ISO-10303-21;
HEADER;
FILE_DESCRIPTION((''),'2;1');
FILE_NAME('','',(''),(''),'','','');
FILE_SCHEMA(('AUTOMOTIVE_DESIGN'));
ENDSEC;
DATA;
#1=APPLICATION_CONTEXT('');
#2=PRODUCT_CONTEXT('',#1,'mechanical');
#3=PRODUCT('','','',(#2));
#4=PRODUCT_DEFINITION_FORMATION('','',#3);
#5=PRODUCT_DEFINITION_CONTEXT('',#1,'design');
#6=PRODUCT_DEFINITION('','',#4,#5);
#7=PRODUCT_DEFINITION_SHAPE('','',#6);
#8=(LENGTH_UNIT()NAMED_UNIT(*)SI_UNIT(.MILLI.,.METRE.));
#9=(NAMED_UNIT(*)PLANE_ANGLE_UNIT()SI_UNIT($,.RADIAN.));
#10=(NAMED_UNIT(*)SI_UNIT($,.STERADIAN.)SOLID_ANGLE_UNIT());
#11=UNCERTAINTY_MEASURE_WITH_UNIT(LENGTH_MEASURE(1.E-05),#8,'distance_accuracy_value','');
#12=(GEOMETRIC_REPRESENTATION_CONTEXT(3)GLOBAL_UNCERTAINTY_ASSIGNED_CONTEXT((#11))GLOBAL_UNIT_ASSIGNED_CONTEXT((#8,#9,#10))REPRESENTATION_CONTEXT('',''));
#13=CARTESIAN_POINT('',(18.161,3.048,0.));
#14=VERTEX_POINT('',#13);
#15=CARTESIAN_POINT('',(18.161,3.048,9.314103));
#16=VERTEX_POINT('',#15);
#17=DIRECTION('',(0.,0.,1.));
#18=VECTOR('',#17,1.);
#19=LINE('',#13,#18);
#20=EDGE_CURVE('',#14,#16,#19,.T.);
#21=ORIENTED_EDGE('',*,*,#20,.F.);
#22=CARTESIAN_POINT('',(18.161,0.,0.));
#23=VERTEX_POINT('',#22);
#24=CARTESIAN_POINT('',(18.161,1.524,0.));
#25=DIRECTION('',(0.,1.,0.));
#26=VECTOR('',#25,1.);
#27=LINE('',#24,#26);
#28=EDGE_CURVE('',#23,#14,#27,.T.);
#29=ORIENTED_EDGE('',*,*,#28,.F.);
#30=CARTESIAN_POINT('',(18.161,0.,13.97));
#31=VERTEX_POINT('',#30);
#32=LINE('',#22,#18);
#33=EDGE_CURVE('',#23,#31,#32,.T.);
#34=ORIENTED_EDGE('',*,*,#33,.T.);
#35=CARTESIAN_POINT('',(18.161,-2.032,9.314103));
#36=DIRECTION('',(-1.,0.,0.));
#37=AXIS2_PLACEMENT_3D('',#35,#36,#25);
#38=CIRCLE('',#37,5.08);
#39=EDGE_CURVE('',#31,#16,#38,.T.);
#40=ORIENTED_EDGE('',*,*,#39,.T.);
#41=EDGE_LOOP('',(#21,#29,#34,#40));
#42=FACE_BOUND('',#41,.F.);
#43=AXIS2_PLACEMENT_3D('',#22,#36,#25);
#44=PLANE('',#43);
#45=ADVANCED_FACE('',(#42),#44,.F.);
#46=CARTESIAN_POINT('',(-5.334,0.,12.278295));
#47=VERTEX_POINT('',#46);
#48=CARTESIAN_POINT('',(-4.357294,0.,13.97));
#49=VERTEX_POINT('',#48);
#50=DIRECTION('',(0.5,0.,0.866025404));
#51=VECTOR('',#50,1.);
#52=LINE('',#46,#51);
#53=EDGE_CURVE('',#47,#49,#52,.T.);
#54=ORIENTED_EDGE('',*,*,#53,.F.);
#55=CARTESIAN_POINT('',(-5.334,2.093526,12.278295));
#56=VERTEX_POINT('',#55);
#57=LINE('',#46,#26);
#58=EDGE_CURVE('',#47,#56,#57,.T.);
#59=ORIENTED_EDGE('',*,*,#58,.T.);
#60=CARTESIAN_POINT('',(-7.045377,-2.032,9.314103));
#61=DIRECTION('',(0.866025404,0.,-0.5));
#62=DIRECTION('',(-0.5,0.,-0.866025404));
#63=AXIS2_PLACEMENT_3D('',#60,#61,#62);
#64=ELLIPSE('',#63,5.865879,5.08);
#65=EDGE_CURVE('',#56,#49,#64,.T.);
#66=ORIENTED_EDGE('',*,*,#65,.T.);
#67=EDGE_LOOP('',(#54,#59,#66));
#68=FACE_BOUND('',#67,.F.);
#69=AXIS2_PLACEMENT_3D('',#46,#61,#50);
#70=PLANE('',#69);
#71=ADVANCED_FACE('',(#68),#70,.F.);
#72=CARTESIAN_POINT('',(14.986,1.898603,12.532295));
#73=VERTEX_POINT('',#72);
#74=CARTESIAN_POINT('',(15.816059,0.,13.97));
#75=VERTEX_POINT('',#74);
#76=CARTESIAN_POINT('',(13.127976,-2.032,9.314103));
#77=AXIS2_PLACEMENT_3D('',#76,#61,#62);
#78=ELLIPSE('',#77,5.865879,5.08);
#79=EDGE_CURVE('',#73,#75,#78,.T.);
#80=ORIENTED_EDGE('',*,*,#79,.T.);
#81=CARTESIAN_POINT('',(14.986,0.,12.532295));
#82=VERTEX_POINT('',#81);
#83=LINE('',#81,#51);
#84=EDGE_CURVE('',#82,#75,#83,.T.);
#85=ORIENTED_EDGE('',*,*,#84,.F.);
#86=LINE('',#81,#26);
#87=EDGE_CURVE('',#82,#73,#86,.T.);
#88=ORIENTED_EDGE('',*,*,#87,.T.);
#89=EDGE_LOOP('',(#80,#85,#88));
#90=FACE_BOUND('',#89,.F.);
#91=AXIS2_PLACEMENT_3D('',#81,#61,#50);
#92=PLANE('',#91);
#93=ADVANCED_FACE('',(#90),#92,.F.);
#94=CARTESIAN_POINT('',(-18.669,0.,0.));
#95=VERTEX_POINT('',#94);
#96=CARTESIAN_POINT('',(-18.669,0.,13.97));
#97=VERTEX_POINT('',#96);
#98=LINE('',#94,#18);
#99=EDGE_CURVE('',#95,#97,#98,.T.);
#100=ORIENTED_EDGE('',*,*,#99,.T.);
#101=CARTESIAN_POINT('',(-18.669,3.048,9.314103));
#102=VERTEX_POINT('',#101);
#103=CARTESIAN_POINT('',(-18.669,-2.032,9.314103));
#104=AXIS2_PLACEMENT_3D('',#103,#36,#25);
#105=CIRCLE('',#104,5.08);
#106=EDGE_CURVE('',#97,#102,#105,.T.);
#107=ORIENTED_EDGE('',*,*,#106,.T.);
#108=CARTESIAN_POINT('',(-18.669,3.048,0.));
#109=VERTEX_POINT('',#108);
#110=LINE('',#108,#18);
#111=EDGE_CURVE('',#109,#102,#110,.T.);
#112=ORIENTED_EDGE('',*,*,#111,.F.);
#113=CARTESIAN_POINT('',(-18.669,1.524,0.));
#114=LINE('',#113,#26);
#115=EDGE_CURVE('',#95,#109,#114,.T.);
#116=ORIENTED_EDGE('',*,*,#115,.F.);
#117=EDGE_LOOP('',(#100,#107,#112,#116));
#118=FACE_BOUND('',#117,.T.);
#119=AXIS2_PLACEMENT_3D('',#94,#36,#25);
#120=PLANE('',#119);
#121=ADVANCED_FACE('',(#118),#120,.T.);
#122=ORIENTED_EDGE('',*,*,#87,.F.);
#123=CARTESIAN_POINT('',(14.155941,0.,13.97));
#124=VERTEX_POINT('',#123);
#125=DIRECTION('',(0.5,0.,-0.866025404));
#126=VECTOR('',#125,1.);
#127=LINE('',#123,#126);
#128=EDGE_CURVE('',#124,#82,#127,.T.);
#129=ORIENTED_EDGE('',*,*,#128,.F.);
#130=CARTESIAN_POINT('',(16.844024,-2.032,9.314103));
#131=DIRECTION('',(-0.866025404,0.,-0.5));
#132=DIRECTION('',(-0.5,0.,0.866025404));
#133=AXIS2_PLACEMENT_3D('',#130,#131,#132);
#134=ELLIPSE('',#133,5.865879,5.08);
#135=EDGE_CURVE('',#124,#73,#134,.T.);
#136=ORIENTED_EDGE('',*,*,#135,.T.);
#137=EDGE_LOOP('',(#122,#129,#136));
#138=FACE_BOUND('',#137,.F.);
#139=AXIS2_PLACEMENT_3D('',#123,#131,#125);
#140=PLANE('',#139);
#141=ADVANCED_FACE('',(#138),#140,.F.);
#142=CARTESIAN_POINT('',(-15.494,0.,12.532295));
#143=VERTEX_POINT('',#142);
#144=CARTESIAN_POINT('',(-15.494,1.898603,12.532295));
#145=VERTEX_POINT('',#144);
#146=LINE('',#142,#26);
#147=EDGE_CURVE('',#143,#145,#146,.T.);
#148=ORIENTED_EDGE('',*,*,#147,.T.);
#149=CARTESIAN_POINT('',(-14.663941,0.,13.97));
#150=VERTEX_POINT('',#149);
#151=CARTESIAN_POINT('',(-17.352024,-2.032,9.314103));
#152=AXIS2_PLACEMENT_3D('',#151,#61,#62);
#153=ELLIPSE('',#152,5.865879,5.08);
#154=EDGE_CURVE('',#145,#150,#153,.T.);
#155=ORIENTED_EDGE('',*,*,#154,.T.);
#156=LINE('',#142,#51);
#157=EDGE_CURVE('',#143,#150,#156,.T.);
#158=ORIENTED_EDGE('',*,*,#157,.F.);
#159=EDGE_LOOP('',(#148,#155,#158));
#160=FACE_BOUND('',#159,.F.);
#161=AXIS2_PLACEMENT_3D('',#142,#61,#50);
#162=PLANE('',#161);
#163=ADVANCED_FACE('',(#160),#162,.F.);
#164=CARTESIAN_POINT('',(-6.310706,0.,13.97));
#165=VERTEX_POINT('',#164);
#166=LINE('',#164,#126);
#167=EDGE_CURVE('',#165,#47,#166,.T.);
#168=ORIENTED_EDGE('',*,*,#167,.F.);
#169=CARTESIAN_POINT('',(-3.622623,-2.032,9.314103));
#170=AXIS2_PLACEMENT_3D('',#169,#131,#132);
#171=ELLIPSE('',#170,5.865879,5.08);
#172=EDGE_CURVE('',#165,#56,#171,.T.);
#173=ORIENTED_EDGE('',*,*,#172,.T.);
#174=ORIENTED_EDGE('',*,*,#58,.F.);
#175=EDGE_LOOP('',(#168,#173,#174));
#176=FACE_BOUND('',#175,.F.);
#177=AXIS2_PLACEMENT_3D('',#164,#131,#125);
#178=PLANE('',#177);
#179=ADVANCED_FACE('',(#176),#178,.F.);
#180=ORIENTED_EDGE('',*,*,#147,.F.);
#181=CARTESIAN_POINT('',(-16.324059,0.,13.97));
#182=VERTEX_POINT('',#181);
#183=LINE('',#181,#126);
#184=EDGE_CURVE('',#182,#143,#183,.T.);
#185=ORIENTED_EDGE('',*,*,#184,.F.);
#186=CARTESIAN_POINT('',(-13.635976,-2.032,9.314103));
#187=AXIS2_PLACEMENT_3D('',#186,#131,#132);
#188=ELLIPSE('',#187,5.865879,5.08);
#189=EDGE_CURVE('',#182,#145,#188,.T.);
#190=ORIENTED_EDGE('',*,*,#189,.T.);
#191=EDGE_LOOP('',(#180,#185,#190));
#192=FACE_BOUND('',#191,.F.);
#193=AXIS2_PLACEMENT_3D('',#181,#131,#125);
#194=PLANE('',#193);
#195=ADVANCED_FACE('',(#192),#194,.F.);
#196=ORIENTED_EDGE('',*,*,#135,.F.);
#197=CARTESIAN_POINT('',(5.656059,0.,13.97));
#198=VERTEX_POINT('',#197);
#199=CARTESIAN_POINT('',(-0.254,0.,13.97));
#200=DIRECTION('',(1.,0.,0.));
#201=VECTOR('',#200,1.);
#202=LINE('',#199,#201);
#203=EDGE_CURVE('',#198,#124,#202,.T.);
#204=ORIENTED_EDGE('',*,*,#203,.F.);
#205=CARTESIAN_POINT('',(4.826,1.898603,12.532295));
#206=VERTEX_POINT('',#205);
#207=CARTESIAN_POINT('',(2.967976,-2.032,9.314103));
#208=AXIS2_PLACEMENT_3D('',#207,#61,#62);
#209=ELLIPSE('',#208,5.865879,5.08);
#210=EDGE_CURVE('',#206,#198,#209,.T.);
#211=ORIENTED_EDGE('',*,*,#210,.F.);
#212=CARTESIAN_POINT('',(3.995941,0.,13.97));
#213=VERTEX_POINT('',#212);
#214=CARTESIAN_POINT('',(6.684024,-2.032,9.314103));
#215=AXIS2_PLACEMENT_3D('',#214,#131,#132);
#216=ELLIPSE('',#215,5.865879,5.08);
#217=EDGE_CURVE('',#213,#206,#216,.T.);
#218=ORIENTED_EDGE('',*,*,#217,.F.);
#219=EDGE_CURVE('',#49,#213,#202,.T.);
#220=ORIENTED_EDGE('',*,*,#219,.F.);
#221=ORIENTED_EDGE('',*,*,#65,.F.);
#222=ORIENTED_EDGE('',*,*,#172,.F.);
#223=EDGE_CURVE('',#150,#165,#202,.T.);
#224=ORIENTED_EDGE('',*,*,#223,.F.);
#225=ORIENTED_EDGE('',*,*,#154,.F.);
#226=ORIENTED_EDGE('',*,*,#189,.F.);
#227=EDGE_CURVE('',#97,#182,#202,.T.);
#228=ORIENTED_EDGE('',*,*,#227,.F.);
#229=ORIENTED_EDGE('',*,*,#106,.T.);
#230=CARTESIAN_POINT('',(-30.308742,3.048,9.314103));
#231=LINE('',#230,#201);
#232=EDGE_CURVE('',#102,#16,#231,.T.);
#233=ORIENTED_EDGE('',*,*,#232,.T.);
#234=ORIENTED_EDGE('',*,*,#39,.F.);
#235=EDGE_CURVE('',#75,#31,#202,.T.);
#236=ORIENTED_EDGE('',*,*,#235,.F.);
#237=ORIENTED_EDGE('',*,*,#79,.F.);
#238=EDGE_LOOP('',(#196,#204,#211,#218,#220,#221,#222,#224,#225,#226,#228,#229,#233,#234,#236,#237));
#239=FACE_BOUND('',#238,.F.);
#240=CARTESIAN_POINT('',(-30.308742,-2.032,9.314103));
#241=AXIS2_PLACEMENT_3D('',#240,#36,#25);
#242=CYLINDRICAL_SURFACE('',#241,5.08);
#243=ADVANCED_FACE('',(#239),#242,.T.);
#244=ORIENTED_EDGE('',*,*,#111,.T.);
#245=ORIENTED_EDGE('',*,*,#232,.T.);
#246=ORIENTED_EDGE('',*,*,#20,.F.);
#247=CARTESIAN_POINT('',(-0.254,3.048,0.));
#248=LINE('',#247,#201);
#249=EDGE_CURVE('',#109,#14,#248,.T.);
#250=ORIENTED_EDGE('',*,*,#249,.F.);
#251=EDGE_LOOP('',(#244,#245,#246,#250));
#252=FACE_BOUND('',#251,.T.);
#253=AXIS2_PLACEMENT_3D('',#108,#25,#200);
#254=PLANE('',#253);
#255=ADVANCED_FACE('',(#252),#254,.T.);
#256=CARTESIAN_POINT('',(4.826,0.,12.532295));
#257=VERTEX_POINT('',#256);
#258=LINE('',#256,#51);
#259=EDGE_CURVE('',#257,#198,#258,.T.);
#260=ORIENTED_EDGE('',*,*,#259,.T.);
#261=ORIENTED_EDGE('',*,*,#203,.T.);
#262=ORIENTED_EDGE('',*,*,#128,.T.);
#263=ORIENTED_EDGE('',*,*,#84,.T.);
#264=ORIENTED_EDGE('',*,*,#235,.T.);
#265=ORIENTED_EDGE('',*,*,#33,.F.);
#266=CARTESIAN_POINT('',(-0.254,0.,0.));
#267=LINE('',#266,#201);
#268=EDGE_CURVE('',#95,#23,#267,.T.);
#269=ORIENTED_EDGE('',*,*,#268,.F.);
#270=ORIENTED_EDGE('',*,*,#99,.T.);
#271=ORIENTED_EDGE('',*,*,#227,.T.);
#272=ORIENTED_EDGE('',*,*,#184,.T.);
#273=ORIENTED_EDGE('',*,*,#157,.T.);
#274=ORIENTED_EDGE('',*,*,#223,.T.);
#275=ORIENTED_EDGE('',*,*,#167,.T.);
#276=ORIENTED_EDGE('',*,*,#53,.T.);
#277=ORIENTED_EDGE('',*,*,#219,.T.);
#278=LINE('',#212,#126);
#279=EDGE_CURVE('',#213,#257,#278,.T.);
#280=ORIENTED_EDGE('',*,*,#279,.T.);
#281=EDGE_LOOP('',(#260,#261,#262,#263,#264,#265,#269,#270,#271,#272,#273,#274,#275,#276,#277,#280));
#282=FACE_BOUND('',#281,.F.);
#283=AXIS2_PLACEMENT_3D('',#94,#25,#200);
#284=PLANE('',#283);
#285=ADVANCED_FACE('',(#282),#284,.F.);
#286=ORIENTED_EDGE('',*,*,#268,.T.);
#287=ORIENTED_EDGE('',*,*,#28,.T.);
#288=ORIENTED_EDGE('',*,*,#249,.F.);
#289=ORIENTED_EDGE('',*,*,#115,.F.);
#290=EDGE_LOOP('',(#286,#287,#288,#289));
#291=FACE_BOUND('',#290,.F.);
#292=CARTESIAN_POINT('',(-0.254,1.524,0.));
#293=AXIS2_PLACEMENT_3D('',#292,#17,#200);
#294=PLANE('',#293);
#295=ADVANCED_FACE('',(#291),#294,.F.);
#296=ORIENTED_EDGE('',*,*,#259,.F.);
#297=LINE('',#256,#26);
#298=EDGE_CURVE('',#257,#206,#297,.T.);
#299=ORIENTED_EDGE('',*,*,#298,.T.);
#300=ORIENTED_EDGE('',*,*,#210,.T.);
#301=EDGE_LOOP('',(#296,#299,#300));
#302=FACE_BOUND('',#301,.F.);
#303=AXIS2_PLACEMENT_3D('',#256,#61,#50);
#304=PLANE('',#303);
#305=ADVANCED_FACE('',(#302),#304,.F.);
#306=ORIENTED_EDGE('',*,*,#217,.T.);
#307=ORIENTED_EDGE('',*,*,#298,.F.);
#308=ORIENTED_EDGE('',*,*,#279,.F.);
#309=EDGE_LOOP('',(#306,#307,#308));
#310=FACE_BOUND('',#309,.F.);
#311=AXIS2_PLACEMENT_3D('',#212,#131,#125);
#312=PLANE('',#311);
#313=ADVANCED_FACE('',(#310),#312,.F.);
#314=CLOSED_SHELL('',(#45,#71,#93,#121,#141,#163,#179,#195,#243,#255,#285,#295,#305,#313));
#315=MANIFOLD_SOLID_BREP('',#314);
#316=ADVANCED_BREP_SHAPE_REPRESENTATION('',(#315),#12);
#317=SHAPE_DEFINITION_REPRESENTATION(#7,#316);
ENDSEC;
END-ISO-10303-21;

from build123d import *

# Parameters (mm, degrees)
F0_W        = 36.83
F0_H        = 3.048
F1_DEPTH    = 13.97
F3_T1_DEPTH = 60.1094845304
F4_DEPTH    = 25.4


# Not quite as in the source:
# - a fillet or chamfer that OpenCascade refuses, or shapes differently, is made with other operations: its cross-section is extruded or revolved along the edge and cut away or added


with BuildPart() as f1:
    # F0 (on Top) → F1 (new body)
    with BuildSketch(Plane.XY):
        with Locations((-0.254, 1.524)):
            Rectangle(F0_W, F0_H)
    extrude(amount=F1_DEPTH)

    # F3: fillet of radius 5.08 on 1 edges, made by hand

    # F3_s2 → F3_t1 (cut)
    with BuildSketch(Plane.YZ.offset(-30.3087422652)):
        with BuildLine():
            ThreePointArc((3.048, 9.3141030939), (2.2182329348, 12.0965336861), (0, 13.97))
            Line((0, 13.97), (3.048, 13.97))
            Line((3.048, 13.97), (3.048, 9.3141030939))
        make_face()
    extrude(amount=F3_T1_DEPTH, mode=Mode.SUBTRACT)

    # F2 (on face) → F4 (cut)
    with BuildSketch(Plane.XZ):
        Polygon((-15.494, 12.5322954744), (-14.6639409051, 13.97), (-16.3240590949, 13.97), align=None)
        Polygon((-4.3572939367, 13.97), (-6.3107060633, 13.97), (-5.334, 12.2782954744), align=None)
        Polygon((5.6560590949, 13.97), (3.9959409051, 13.97), (4.826, 12.5322954744), align=None)
        Polygon((15.8160590949, 13.97), (14.1559409051, 13.97), (14.986, 12.5322954744), align=None)
    extrude(amount=-F4_DEPTH, mode=Mode.SUBTRACT)


solid = f1.part
